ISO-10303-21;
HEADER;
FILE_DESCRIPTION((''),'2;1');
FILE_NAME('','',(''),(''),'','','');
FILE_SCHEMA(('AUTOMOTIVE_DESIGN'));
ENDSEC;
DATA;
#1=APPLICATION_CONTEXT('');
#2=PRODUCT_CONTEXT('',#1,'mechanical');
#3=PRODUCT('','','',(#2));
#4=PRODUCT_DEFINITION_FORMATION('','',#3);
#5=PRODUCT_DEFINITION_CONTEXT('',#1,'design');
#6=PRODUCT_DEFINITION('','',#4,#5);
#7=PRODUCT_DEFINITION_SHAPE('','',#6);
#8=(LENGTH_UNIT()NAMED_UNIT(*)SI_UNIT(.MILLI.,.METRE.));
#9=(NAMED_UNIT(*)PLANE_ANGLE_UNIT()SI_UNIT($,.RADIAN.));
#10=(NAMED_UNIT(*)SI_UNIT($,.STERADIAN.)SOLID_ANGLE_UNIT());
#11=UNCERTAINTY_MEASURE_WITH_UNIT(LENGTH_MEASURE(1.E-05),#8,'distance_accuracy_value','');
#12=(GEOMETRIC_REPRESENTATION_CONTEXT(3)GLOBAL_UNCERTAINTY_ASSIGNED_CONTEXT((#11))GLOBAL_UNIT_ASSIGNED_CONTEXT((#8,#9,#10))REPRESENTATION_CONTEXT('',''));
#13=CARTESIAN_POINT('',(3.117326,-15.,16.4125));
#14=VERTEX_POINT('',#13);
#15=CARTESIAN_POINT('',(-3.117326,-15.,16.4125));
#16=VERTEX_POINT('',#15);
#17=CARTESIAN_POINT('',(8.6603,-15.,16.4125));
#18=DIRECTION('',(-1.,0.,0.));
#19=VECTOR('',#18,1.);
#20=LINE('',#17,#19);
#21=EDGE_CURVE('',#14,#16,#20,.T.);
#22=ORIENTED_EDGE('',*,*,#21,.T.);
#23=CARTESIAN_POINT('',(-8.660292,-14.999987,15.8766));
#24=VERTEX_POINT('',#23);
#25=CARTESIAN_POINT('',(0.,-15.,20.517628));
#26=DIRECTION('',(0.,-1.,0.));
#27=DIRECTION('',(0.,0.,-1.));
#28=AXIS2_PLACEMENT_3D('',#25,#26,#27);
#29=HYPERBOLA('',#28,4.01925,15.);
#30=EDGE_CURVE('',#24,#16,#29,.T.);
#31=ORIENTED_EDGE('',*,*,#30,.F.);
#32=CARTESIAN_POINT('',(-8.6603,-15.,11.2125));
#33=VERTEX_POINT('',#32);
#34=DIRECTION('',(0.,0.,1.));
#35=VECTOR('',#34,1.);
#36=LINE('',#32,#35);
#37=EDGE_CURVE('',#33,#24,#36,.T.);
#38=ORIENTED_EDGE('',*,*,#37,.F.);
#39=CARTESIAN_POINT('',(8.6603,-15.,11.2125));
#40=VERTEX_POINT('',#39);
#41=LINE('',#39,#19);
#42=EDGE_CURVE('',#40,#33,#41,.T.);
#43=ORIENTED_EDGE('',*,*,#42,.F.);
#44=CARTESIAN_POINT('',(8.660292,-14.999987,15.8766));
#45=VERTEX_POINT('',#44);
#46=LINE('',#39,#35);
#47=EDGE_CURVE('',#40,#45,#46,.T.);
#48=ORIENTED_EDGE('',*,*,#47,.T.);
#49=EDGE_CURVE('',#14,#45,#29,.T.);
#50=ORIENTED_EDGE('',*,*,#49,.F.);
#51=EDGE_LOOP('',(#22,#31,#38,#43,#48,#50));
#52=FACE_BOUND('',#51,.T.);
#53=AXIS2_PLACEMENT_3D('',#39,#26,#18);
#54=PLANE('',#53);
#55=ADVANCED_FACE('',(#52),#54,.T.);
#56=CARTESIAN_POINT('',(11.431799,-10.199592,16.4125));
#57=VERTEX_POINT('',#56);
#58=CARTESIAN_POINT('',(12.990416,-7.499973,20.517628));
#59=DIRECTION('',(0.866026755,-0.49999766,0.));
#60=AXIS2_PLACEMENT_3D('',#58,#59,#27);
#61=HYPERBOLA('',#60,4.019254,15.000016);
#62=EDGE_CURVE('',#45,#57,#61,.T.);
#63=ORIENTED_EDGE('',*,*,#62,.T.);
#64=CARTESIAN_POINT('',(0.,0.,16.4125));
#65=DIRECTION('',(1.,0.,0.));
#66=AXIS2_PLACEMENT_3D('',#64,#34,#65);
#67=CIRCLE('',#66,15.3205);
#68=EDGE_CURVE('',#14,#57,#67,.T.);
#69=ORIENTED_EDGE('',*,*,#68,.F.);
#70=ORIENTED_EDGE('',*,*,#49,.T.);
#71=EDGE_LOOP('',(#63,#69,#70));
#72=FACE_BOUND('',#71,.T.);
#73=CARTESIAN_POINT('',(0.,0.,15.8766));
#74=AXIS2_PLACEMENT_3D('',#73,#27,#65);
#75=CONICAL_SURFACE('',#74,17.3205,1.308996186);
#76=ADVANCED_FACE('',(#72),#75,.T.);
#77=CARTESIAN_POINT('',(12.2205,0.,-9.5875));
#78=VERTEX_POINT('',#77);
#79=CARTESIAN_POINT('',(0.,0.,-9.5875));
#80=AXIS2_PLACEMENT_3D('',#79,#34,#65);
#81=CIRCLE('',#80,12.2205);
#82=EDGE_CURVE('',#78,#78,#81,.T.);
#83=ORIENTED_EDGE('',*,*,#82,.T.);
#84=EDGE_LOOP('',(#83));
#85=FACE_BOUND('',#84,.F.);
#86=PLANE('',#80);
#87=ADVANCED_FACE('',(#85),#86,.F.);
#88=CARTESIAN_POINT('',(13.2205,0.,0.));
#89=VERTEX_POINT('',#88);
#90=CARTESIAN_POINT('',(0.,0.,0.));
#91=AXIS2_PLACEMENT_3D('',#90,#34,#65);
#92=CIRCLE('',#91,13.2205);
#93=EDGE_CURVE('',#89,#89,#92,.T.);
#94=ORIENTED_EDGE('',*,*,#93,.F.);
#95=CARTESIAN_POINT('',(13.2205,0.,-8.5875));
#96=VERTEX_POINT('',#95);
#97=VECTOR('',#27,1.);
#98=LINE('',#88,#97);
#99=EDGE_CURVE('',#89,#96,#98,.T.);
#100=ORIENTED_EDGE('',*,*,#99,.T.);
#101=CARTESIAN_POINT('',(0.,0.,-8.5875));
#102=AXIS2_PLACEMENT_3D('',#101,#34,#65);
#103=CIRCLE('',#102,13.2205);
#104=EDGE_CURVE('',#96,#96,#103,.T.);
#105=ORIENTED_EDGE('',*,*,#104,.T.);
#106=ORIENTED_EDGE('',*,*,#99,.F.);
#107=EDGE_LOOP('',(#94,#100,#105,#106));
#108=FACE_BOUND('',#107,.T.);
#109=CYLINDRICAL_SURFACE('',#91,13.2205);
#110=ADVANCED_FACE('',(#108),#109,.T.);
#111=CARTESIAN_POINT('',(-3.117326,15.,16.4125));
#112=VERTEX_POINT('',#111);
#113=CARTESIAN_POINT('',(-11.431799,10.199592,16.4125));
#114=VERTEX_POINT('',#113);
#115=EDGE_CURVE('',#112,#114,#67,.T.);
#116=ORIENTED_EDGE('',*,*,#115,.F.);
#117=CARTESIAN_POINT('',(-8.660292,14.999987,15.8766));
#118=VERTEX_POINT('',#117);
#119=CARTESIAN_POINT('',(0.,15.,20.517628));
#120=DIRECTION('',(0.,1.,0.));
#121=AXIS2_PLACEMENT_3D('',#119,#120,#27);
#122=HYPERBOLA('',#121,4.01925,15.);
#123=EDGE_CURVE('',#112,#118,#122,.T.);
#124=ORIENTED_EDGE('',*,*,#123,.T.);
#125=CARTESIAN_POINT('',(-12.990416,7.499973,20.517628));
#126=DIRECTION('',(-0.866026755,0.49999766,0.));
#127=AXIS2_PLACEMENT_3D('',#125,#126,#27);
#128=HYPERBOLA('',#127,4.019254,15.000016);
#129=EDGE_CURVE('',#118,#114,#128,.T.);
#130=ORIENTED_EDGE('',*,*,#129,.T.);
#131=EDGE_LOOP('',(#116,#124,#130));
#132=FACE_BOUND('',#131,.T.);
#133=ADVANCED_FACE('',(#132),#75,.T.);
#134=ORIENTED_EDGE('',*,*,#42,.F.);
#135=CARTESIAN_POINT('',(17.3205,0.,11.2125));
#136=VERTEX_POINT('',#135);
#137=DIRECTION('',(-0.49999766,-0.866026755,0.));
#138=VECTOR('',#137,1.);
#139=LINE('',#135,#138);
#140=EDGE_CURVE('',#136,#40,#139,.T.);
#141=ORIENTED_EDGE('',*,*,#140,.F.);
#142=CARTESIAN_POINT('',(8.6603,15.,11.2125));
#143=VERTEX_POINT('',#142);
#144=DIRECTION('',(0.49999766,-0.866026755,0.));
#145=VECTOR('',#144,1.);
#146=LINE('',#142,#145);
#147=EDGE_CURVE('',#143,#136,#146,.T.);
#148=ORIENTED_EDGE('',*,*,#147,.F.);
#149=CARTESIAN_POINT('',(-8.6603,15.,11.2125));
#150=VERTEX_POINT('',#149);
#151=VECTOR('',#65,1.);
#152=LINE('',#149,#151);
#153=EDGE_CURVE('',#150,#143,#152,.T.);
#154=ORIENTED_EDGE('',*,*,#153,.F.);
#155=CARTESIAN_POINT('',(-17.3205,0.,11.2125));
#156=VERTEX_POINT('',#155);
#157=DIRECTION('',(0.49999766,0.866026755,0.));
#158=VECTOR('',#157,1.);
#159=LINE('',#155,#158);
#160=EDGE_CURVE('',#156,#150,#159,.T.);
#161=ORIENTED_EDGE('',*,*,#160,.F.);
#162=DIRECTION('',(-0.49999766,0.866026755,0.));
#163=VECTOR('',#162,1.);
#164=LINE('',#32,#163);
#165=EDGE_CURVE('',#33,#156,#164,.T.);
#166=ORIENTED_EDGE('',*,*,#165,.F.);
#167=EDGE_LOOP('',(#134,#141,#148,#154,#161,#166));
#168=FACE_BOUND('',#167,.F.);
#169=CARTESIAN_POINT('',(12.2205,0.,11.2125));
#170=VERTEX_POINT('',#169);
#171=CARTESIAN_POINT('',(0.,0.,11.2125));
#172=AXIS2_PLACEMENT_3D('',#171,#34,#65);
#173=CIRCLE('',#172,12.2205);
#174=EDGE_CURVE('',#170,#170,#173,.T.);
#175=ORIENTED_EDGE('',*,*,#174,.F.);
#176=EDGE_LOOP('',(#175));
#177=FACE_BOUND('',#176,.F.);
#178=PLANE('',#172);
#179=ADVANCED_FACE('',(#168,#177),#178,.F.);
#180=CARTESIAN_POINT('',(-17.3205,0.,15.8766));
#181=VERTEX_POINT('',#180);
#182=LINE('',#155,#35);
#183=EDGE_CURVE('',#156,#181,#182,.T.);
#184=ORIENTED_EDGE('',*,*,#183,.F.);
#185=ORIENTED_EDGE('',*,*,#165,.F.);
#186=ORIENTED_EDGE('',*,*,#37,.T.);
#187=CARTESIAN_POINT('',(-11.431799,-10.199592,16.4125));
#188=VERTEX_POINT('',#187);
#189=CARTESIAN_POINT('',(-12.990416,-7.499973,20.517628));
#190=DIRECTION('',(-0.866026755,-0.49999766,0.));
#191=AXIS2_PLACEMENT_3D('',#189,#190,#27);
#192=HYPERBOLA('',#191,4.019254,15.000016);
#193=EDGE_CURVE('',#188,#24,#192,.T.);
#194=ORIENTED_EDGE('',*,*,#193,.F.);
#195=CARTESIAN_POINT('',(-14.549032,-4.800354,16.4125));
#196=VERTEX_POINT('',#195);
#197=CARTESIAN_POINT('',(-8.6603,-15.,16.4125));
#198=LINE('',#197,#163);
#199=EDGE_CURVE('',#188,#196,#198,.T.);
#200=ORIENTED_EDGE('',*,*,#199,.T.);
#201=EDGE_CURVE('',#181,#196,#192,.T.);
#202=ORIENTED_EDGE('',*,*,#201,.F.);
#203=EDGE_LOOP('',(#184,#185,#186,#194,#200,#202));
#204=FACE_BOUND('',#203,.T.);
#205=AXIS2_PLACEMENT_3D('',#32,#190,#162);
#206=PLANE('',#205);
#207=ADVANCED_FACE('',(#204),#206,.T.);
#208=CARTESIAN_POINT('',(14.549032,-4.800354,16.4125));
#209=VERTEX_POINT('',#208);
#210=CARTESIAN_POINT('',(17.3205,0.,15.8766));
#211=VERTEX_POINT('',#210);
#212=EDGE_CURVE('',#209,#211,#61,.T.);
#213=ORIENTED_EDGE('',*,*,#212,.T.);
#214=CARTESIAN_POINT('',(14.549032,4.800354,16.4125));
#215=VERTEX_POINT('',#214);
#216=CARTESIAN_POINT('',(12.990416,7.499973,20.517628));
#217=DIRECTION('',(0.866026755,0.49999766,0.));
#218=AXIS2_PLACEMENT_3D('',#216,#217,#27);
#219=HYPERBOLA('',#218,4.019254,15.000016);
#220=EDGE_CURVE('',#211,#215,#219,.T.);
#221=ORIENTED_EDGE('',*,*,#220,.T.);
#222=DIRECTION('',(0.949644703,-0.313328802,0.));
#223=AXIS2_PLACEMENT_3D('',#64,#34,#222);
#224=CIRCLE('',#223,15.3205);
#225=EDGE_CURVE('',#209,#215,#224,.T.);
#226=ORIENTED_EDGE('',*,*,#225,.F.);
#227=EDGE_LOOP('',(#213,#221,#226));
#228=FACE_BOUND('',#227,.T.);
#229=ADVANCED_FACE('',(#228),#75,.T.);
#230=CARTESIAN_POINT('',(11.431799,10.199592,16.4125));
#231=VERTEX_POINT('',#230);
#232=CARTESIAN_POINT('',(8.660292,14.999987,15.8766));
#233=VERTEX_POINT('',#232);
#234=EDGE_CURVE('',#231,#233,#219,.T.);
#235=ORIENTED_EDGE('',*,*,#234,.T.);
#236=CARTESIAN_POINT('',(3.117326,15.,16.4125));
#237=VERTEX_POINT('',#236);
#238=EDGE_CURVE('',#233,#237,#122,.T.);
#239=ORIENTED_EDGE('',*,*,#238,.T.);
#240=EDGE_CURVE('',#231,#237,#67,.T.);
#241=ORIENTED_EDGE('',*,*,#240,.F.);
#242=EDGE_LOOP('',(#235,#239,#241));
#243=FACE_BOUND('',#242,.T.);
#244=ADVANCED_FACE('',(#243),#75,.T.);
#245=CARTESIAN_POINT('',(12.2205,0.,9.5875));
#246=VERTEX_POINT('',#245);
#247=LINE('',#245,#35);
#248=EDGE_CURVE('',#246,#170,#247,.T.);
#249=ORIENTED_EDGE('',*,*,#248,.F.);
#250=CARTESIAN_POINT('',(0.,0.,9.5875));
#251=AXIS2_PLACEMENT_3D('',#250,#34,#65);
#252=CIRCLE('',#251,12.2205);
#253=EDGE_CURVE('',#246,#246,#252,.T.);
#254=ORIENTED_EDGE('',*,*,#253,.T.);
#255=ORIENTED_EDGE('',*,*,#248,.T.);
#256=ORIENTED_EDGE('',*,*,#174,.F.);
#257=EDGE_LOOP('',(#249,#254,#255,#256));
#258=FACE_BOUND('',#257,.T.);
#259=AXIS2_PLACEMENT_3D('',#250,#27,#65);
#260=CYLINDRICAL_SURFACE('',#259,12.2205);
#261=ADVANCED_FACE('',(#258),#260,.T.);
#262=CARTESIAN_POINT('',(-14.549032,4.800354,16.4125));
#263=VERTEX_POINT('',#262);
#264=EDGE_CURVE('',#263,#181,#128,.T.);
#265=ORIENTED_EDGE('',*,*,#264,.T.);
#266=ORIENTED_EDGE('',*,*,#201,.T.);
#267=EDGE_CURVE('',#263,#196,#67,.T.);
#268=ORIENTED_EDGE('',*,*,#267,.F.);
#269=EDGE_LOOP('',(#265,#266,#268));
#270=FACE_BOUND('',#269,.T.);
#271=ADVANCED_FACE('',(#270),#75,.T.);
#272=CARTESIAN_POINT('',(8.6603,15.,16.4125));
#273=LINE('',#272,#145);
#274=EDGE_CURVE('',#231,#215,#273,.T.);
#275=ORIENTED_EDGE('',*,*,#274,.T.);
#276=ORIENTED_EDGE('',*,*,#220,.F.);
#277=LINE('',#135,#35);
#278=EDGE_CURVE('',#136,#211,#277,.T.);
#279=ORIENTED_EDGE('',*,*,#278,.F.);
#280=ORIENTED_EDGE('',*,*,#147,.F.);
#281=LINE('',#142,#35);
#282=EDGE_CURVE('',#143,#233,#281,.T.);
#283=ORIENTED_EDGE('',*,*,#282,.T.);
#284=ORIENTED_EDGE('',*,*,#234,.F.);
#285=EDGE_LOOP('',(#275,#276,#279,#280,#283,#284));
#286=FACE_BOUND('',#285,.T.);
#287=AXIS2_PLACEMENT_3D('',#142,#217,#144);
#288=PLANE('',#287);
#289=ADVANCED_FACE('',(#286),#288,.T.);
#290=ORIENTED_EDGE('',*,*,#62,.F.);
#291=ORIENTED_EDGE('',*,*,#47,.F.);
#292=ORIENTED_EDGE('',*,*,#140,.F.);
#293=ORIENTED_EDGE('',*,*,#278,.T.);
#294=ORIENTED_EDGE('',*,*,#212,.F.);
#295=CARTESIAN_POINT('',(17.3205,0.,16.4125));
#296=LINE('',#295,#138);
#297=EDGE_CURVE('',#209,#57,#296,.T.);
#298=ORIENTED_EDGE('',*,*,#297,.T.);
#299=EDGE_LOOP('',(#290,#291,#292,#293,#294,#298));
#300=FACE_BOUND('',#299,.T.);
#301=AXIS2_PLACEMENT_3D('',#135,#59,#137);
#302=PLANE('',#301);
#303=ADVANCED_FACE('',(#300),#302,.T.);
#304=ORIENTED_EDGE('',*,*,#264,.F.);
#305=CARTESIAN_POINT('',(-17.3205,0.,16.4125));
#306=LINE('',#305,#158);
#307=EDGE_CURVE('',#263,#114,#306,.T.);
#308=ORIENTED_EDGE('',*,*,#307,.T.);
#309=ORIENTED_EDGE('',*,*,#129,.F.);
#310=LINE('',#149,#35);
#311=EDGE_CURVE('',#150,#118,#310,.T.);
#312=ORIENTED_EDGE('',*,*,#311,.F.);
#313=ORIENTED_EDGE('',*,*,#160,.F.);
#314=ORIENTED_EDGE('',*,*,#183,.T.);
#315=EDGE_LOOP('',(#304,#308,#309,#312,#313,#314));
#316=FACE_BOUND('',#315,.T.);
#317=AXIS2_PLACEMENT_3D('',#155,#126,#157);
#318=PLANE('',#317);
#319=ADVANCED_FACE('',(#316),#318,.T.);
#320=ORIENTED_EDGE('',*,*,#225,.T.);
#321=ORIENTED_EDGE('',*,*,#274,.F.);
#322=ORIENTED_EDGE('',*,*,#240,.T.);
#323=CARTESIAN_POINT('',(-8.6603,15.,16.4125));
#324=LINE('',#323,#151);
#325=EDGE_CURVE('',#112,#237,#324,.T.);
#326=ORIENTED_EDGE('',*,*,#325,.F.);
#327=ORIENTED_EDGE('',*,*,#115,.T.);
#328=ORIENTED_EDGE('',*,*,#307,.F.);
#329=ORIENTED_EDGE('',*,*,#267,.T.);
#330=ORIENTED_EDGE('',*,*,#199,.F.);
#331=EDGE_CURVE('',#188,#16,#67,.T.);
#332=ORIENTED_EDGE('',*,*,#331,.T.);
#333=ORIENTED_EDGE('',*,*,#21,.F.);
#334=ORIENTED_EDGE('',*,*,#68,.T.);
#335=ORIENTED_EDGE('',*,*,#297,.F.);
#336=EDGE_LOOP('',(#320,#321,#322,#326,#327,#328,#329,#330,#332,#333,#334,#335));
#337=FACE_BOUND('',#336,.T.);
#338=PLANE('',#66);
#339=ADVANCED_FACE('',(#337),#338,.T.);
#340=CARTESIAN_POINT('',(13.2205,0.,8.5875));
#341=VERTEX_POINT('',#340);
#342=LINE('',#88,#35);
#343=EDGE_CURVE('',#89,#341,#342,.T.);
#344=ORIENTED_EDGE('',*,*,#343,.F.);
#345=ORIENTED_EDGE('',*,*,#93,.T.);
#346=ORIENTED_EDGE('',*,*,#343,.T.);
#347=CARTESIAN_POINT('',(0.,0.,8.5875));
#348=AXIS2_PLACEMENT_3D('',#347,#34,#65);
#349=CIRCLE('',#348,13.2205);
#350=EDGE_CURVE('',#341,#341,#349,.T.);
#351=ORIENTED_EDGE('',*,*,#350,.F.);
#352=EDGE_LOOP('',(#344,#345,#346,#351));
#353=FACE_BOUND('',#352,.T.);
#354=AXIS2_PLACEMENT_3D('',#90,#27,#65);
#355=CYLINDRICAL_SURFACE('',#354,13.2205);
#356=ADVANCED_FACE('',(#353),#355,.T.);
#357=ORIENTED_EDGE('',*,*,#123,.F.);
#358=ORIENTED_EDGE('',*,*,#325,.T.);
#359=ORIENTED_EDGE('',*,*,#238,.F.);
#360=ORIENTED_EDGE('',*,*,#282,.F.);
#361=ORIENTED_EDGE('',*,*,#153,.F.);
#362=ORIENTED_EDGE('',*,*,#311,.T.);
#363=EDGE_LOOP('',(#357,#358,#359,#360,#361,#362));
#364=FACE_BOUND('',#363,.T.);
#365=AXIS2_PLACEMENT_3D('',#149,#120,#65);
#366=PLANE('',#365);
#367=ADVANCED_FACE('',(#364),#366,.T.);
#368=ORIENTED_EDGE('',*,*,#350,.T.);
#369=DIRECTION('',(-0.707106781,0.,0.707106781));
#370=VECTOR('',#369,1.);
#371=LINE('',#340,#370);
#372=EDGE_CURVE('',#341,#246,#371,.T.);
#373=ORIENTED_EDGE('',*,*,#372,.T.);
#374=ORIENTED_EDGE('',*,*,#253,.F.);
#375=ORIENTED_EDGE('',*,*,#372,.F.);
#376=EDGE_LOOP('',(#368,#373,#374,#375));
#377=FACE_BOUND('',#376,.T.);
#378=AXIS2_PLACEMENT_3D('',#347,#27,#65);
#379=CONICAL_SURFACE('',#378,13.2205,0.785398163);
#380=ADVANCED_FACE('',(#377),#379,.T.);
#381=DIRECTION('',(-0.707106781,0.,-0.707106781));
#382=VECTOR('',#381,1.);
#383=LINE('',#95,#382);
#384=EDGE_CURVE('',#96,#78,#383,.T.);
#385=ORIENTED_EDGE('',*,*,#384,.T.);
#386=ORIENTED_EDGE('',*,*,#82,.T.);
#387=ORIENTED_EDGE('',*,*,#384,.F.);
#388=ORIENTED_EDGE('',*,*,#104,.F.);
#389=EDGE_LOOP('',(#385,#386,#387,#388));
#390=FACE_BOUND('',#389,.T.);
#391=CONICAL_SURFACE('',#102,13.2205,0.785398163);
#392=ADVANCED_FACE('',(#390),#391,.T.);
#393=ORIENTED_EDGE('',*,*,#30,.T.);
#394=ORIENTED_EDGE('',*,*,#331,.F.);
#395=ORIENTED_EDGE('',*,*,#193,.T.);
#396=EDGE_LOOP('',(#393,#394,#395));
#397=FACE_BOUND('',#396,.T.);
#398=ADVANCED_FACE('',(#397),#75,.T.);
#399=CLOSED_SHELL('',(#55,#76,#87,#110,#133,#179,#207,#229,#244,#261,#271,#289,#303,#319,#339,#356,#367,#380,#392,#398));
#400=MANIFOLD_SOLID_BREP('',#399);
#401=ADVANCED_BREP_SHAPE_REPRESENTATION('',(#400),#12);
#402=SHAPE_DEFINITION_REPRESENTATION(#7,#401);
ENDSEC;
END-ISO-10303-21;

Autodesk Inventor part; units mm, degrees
ref_plane "YZ Plane" through (0, 0, 0) normal (1, 0, 0) x (0, 1, 0)
ref_plane "XZ Plane" through (0, 0, 0) normal (0, 1, 0) x (-1, 0, 0)
ref_plane "XY Plane" through (0, 0, 0) normal (0, 0, 1) x (1, 0, 0)
sketch "Szkic7" plane through (0, 0, 0) normal (0, 0, 1) x (1, 0, 0)
  circle A0 centre (0, 0) radius 13.2205
  dimension "d35" = 26.441
extrude "Wyciągnięcie proste2" add sketch "Szkic7" along normal mid plane 19.175
chamfer "Faza2" distance 1 angle 45 1 edges at (-13.2205, 0, 9.5875)
sketch "Szkic9" plane through (0, 0, 9.5875) normal (0, 0, 1) x (1, 0, 0)
  circle A0 centre (0, 0) radius 12.2205 projected
extrude "Wyciągnięcie proste3" add sketch "Szkic9" along normal blind 1.625
sketch "Szkic10" plane through (0, 0, 11.2125) normal (0, 0, 1) x (1, 0, 0)
  line L0 (-8.6603, 15) -> (8.6603, 15)
  line L1 (8.6603, 15) -> (17.3205, 0)
  line L2 (17.3205, 0) -> (8.6603, -15)
  line L3 (8.6603, -15) -> (-8.6603, -15)
  line L4 (-8.6603, -15) -> (-17.3205, 0)
  line L5 (-17.3205, 0) -> (-8.6603, 15)
  line L6 (0, 18.5087) -> (0, -18.5087) construction
  line L7 (-18.5087, 0) -> (18.5087, 0) construction
  point P0 (0, 0)
  point P1 (0, 0)
  point P2 (0, 15)
  dimension "d44" = 30
extrude "Wyciągnięcie proste4" add sketch "Szkic10" along normal blind 5.2
sketch "Szkic12" plane through (0, 0, 0) normal (0, 1, 0) x (-1, 0, 0)
  line L0 (0, -2.1463) -> (0, 12.8775) construction
  line L1 (-8.6603, 11.2125) -> (-8.6603, 16.4125) construction
  line L2 (-17.3205, 16.4125) -> (-8.6603, 16.4125) construction
  line L3 (-17.3205, 11.2125) -> (-17.3205, 16.4125) projected
  line L4 (-17.3205, 15.8766) -> (-15.3205, 16.4125)
  line L5 (-17.3205, 16.4125) -> (-8.6603, 16.4125) projected
  line L6 (-17.3205, 11.2125) -> (-8.6603, 11.2125) projected
  point P0 (0, 0)
  dimension "d50" = 15
  dimension "d51" = 2
revolve "Obrót2" cut sketch "Szkic12" angle 360 about axis through (0, 0, -10) along (0, 0, 1)
thread "Gwint3" size "G26.441x1.814" designation "G 3/4" class "A" standard "ISO Pipe Threads" full length
chamfer "Faza3" distance 1 angle 45 1 edges at (-13.2205, 0, -9.5875)
equation "\"d35\" = OD"
equation "\"d36\" = 0.7375 * L"
equation "\"d42\" = 0.0625 * L"
equation "\"d44\" = SW"
equation "\"d45\" = 0.2 * L"
equation "\"d51\" = 0.0666667 * SW"
equation "\"SzerokośćGięciaPodcięcia\" = Grubość"
equation "\"RozmiarPodcięciaNarożnika\" = 4 * Grubość"
equation "\"PromieńPrzejścia\" = PromieńGięcia"
equation "\"Rozmiar_promienia_Jacobiego\" = PromieńGięcia"
equation "\"Wielk_odstępu\" = Grubość"
equation "\"d2\" = PromieńGięcia"
equation "\"d23\" = PromieńGięcia"
equation "\"OD\" = 26.441"
equation "\"SW\" = 30"
equation "\"L\" = 26"
equation "\"Grubość\" = 1.5"
equation "\"PromieńGięcia\" = 3"
properties part number "Korek sześciokątny BSP 3/4'' L=26" material "304"
